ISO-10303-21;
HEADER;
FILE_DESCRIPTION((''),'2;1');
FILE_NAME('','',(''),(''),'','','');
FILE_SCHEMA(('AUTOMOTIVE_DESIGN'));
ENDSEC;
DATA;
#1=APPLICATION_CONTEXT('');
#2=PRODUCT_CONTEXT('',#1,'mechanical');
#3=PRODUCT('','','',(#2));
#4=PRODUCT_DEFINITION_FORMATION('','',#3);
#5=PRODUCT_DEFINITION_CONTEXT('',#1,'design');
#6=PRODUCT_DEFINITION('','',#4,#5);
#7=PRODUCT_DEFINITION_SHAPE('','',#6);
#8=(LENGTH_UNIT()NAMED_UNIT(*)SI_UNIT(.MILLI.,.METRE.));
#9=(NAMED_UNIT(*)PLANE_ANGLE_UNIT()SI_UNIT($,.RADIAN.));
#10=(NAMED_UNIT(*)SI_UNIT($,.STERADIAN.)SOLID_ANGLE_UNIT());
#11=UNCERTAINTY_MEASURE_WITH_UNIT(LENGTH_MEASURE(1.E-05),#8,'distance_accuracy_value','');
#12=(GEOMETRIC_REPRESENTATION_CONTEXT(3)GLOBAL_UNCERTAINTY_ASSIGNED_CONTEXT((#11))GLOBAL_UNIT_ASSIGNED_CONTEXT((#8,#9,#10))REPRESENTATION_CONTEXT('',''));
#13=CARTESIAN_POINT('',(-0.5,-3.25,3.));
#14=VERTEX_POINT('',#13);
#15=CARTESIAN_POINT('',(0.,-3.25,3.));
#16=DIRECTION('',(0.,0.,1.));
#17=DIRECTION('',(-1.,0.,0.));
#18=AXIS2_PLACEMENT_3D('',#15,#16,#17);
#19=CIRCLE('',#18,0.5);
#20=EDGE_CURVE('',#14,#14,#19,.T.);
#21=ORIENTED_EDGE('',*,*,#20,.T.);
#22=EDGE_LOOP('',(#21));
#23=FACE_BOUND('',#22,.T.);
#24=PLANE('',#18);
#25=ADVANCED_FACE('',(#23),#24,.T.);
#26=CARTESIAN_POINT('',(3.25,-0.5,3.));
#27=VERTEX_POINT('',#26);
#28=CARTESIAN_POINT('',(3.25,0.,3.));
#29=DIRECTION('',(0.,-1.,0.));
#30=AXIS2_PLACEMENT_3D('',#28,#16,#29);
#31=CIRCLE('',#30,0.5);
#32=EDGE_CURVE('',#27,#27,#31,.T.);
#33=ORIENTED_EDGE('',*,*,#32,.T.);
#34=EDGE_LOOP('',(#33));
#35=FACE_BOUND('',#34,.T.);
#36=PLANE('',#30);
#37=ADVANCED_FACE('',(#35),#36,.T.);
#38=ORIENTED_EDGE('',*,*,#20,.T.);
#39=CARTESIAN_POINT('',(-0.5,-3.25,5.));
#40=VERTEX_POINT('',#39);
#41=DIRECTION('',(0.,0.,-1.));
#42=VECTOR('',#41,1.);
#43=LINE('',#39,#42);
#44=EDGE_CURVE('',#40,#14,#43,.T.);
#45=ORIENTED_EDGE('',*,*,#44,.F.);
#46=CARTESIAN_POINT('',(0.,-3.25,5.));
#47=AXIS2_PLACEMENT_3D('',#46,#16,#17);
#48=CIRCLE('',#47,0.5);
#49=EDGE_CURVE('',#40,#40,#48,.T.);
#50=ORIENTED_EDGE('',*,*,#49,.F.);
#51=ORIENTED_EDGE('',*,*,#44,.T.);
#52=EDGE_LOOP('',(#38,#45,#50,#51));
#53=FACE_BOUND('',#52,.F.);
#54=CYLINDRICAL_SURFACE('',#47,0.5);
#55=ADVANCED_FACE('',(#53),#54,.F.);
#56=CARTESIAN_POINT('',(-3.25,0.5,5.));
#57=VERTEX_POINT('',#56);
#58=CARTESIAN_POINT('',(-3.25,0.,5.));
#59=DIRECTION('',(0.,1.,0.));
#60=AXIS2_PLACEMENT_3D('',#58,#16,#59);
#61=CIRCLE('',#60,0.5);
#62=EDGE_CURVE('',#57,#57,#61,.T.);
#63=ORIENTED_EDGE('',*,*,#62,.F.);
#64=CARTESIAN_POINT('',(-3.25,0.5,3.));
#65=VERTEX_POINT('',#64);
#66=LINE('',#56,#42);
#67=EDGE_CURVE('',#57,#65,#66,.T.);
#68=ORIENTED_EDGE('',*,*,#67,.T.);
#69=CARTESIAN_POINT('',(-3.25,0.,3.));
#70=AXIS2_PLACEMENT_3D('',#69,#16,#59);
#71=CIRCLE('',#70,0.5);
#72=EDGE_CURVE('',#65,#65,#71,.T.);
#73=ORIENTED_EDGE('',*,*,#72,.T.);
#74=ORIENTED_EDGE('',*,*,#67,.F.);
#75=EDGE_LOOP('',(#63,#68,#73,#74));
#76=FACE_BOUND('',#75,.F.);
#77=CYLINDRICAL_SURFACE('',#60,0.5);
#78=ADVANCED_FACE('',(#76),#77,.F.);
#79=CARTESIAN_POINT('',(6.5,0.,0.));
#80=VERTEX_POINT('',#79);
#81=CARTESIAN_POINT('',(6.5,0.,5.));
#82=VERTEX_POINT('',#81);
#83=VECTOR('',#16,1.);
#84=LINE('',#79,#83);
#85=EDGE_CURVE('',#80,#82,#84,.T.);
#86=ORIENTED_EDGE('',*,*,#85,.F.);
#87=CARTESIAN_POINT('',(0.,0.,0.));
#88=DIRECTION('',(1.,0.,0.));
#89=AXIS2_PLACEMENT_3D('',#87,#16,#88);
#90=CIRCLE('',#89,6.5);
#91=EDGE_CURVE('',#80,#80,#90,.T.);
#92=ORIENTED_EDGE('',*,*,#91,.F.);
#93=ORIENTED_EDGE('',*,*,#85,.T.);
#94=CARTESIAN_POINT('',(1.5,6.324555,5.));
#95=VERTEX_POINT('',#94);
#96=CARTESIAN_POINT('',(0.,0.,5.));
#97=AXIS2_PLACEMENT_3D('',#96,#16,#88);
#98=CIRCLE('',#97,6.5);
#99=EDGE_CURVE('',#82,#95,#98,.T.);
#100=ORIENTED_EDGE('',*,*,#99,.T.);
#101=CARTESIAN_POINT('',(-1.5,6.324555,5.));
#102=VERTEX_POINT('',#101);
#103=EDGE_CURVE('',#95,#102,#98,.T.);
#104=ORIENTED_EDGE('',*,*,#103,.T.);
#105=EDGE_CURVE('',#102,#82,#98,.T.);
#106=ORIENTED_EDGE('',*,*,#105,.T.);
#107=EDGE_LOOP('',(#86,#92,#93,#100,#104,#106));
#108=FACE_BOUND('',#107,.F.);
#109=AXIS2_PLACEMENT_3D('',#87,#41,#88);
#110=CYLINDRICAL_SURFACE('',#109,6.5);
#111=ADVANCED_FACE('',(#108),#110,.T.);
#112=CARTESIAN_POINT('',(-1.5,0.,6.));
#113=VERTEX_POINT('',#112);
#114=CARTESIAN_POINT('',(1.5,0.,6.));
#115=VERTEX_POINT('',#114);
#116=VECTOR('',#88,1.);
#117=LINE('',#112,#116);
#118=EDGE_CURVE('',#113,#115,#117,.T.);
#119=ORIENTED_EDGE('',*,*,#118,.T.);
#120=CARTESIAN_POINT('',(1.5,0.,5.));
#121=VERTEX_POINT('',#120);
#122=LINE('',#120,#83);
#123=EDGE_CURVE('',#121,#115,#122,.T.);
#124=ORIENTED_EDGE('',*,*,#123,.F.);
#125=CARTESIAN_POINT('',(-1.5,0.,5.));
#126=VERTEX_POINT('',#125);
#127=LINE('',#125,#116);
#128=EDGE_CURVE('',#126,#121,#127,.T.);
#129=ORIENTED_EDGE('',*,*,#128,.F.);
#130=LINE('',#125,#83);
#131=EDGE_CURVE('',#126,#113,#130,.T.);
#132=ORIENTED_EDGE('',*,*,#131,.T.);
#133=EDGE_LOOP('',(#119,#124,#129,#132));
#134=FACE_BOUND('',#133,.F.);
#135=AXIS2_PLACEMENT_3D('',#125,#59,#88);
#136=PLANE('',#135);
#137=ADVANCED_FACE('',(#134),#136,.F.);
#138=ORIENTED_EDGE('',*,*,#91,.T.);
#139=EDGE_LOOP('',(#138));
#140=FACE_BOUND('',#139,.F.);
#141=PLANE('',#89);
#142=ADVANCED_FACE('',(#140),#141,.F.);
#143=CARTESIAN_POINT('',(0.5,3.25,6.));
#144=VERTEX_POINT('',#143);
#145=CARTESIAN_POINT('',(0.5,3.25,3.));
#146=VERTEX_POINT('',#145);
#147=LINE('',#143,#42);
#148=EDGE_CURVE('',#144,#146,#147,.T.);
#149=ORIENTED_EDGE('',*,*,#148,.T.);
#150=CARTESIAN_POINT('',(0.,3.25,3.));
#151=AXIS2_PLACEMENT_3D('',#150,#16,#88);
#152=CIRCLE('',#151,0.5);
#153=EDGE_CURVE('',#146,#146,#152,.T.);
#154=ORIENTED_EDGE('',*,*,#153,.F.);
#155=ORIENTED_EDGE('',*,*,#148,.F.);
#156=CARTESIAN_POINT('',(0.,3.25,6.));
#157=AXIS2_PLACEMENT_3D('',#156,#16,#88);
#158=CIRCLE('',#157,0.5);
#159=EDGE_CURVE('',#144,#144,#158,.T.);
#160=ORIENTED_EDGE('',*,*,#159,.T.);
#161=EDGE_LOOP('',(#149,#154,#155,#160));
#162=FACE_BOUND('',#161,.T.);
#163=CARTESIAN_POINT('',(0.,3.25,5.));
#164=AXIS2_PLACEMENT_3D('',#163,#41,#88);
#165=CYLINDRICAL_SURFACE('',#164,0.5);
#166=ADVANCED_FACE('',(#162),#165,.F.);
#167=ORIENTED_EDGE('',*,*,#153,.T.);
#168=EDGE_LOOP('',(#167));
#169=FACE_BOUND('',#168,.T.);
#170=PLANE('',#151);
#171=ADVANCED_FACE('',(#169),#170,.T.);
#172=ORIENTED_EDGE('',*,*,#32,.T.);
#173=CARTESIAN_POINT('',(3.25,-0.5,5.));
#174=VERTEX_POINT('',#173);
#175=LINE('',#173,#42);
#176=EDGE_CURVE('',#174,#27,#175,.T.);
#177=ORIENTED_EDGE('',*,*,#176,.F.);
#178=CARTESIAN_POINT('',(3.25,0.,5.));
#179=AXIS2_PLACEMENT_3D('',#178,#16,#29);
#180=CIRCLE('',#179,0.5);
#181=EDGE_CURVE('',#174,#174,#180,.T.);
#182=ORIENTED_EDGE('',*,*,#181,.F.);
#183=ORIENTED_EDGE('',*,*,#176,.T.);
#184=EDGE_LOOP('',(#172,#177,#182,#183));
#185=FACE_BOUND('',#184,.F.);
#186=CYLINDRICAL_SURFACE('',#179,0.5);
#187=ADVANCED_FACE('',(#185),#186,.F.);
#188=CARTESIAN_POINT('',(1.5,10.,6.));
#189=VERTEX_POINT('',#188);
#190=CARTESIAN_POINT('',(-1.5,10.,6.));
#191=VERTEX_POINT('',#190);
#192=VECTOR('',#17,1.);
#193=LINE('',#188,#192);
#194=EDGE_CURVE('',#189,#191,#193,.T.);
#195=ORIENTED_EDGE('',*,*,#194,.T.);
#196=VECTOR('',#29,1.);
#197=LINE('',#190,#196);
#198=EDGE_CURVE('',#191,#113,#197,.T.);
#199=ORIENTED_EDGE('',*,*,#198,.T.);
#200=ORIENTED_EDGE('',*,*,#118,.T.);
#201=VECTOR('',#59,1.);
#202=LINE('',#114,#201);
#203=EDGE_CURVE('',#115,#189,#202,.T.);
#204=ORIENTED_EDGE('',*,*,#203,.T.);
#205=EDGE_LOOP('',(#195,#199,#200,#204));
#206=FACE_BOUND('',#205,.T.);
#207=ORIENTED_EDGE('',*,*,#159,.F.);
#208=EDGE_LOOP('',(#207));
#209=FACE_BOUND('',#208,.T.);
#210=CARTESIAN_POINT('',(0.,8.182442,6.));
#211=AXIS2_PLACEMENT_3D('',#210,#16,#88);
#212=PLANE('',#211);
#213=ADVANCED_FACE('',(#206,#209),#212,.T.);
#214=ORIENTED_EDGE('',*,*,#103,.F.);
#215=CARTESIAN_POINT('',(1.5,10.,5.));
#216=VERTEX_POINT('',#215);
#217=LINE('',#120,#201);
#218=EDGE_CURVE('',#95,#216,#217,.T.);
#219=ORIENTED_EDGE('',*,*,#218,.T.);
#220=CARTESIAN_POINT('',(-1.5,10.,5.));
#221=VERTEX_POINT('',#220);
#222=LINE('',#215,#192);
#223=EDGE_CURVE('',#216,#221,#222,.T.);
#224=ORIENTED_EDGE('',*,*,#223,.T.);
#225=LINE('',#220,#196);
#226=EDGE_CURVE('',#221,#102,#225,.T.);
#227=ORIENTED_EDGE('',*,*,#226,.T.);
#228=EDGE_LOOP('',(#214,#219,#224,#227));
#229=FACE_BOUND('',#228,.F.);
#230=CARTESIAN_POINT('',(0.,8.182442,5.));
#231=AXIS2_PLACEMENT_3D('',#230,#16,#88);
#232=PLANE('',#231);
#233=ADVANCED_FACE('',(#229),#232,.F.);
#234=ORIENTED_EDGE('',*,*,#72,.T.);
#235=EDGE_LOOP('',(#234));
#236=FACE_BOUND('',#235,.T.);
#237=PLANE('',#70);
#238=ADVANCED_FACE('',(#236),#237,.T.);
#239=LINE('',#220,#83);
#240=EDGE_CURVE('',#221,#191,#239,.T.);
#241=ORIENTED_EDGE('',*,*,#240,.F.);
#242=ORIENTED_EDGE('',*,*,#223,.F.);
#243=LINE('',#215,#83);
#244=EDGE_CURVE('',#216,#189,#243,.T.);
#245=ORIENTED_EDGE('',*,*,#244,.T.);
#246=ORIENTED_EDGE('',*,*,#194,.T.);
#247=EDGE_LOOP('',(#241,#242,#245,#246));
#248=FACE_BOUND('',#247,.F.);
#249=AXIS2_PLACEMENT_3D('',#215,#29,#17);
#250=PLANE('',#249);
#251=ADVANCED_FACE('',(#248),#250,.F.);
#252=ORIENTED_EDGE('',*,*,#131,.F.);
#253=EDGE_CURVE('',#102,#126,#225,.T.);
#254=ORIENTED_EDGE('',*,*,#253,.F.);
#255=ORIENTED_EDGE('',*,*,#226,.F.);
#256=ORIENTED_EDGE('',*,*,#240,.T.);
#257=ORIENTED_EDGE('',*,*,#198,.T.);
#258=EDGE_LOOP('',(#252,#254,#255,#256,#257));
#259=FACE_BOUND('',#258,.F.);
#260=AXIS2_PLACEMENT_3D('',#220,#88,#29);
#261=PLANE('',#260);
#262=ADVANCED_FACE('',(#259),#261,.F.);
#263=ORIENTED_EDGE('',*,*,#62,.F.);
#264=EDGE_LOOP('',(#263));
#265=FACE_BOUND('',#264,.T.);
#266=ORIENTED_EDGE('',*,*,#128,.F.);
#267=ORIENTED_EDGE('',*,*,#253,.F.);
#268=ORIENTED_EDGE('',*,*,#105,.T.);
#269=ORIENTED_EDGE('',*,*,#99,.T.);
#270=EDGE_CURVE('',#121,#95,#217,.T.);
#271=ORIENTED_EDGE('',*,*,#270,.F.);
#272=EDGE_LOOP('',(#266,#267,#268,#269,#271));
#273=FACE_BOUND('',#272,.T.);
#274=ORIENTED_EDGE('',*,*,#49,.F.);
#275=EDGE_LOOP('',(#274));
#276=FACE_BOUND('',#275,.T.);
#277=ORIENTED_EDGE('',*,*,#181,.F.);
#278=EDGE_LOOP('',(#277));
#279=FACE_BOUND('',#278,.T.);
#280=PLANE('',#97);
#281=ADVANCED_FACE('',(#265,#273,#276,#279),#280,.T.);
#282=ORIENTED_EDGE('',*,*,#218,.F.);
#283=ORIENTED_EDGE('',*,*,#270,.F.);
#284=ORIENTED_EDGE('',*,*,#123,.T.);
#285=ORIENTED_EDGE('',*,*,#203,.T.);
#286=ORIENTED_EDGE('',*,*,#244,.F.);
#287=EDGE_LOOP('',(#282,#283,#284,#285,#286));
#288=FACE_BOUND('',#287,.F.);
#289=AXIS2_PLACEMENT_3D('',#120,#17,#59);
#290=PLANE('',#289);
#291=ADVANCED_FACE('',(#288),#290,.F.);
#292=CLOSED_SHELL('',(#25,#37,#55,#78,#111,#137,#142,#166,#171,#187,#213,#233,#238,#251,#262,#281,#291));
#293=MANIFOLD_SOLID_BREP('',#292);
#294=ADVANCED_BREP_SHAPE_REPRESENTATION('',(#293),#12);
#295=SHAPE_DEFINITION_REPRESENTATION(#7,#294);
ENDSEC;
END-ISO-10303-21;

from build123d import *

# Parameters (mm, degrees)
F0_R            = 6.5
F1_DEPTH        = 5
F2_R            = 0.5
F3_DEPTH        = 2
F3_COPIES_COUNT = 4
F4_R            = 0.5
F5_DEPTH        = 1


# Not quite as in the source:
# - a pattern or mirror of a feature is missing from the dataset's text; its kind, count and spacing are read off the source's solid


with BuildPart() as f1:
    # F0 (on Top) → F1 (new body)
    with BuildSketch(Plane.XY):
        Circle(F0_R)
    extrude(amount=F1_DEPTH)

    # F2 (on face) → F3 (cut)
    with BuildSketch(Plane.XY.offset(5)):
        with Locations((0, 3.25)):
            Circle(F2_R)
    f3 = extrude(amount=-F3_DEPTH, mode=Mode.SUBTRACT)

    # F3_copies: F3 ×4 about axis
    f3_copies_axis = Axis((0, 0, 0), (0, 0, 1))
    for i in range(1, F3_COPIES_COUNT):
        add(f3.rotate(f3_copies_axis, i * 360 / F3_COPIES_COUNT), mode=Mode.SUBTRACT)

    # F4 (on face) → F5 (join)
    with BuildSketch(Plane.XY.offset(5)):
        with BuildLine():
            Line((-1.5, 10), (-1.5, 6.3245553203))
            ThreePointArc((-1.5, 6.3245553203), (0, 6.5), (1.5, 6.3245553203))
            Line((1.5, 6.3245553203), (1.5, 10))
            Line((1.5, 10), (-1.5, 10))
        make_face()
        with BuildLine():
            Line((-1.5, 6.3245553203), (-1.5, 0))
            Line((-1.5, 0), (1.5, 0))
            Line((1.5, 0), (1.5, 6.3245553203))
            ThreePointArc((1.5, 6.3245553203), (0, 6.5), (-1.5, 6.3245553203))
        make_face()
        with Locations((0, 3.25)):
            Circle(F4_R, mode=Mode.SUBTRACT)
    extrude(amount=F5_DEPTH)


solid = f1.part
